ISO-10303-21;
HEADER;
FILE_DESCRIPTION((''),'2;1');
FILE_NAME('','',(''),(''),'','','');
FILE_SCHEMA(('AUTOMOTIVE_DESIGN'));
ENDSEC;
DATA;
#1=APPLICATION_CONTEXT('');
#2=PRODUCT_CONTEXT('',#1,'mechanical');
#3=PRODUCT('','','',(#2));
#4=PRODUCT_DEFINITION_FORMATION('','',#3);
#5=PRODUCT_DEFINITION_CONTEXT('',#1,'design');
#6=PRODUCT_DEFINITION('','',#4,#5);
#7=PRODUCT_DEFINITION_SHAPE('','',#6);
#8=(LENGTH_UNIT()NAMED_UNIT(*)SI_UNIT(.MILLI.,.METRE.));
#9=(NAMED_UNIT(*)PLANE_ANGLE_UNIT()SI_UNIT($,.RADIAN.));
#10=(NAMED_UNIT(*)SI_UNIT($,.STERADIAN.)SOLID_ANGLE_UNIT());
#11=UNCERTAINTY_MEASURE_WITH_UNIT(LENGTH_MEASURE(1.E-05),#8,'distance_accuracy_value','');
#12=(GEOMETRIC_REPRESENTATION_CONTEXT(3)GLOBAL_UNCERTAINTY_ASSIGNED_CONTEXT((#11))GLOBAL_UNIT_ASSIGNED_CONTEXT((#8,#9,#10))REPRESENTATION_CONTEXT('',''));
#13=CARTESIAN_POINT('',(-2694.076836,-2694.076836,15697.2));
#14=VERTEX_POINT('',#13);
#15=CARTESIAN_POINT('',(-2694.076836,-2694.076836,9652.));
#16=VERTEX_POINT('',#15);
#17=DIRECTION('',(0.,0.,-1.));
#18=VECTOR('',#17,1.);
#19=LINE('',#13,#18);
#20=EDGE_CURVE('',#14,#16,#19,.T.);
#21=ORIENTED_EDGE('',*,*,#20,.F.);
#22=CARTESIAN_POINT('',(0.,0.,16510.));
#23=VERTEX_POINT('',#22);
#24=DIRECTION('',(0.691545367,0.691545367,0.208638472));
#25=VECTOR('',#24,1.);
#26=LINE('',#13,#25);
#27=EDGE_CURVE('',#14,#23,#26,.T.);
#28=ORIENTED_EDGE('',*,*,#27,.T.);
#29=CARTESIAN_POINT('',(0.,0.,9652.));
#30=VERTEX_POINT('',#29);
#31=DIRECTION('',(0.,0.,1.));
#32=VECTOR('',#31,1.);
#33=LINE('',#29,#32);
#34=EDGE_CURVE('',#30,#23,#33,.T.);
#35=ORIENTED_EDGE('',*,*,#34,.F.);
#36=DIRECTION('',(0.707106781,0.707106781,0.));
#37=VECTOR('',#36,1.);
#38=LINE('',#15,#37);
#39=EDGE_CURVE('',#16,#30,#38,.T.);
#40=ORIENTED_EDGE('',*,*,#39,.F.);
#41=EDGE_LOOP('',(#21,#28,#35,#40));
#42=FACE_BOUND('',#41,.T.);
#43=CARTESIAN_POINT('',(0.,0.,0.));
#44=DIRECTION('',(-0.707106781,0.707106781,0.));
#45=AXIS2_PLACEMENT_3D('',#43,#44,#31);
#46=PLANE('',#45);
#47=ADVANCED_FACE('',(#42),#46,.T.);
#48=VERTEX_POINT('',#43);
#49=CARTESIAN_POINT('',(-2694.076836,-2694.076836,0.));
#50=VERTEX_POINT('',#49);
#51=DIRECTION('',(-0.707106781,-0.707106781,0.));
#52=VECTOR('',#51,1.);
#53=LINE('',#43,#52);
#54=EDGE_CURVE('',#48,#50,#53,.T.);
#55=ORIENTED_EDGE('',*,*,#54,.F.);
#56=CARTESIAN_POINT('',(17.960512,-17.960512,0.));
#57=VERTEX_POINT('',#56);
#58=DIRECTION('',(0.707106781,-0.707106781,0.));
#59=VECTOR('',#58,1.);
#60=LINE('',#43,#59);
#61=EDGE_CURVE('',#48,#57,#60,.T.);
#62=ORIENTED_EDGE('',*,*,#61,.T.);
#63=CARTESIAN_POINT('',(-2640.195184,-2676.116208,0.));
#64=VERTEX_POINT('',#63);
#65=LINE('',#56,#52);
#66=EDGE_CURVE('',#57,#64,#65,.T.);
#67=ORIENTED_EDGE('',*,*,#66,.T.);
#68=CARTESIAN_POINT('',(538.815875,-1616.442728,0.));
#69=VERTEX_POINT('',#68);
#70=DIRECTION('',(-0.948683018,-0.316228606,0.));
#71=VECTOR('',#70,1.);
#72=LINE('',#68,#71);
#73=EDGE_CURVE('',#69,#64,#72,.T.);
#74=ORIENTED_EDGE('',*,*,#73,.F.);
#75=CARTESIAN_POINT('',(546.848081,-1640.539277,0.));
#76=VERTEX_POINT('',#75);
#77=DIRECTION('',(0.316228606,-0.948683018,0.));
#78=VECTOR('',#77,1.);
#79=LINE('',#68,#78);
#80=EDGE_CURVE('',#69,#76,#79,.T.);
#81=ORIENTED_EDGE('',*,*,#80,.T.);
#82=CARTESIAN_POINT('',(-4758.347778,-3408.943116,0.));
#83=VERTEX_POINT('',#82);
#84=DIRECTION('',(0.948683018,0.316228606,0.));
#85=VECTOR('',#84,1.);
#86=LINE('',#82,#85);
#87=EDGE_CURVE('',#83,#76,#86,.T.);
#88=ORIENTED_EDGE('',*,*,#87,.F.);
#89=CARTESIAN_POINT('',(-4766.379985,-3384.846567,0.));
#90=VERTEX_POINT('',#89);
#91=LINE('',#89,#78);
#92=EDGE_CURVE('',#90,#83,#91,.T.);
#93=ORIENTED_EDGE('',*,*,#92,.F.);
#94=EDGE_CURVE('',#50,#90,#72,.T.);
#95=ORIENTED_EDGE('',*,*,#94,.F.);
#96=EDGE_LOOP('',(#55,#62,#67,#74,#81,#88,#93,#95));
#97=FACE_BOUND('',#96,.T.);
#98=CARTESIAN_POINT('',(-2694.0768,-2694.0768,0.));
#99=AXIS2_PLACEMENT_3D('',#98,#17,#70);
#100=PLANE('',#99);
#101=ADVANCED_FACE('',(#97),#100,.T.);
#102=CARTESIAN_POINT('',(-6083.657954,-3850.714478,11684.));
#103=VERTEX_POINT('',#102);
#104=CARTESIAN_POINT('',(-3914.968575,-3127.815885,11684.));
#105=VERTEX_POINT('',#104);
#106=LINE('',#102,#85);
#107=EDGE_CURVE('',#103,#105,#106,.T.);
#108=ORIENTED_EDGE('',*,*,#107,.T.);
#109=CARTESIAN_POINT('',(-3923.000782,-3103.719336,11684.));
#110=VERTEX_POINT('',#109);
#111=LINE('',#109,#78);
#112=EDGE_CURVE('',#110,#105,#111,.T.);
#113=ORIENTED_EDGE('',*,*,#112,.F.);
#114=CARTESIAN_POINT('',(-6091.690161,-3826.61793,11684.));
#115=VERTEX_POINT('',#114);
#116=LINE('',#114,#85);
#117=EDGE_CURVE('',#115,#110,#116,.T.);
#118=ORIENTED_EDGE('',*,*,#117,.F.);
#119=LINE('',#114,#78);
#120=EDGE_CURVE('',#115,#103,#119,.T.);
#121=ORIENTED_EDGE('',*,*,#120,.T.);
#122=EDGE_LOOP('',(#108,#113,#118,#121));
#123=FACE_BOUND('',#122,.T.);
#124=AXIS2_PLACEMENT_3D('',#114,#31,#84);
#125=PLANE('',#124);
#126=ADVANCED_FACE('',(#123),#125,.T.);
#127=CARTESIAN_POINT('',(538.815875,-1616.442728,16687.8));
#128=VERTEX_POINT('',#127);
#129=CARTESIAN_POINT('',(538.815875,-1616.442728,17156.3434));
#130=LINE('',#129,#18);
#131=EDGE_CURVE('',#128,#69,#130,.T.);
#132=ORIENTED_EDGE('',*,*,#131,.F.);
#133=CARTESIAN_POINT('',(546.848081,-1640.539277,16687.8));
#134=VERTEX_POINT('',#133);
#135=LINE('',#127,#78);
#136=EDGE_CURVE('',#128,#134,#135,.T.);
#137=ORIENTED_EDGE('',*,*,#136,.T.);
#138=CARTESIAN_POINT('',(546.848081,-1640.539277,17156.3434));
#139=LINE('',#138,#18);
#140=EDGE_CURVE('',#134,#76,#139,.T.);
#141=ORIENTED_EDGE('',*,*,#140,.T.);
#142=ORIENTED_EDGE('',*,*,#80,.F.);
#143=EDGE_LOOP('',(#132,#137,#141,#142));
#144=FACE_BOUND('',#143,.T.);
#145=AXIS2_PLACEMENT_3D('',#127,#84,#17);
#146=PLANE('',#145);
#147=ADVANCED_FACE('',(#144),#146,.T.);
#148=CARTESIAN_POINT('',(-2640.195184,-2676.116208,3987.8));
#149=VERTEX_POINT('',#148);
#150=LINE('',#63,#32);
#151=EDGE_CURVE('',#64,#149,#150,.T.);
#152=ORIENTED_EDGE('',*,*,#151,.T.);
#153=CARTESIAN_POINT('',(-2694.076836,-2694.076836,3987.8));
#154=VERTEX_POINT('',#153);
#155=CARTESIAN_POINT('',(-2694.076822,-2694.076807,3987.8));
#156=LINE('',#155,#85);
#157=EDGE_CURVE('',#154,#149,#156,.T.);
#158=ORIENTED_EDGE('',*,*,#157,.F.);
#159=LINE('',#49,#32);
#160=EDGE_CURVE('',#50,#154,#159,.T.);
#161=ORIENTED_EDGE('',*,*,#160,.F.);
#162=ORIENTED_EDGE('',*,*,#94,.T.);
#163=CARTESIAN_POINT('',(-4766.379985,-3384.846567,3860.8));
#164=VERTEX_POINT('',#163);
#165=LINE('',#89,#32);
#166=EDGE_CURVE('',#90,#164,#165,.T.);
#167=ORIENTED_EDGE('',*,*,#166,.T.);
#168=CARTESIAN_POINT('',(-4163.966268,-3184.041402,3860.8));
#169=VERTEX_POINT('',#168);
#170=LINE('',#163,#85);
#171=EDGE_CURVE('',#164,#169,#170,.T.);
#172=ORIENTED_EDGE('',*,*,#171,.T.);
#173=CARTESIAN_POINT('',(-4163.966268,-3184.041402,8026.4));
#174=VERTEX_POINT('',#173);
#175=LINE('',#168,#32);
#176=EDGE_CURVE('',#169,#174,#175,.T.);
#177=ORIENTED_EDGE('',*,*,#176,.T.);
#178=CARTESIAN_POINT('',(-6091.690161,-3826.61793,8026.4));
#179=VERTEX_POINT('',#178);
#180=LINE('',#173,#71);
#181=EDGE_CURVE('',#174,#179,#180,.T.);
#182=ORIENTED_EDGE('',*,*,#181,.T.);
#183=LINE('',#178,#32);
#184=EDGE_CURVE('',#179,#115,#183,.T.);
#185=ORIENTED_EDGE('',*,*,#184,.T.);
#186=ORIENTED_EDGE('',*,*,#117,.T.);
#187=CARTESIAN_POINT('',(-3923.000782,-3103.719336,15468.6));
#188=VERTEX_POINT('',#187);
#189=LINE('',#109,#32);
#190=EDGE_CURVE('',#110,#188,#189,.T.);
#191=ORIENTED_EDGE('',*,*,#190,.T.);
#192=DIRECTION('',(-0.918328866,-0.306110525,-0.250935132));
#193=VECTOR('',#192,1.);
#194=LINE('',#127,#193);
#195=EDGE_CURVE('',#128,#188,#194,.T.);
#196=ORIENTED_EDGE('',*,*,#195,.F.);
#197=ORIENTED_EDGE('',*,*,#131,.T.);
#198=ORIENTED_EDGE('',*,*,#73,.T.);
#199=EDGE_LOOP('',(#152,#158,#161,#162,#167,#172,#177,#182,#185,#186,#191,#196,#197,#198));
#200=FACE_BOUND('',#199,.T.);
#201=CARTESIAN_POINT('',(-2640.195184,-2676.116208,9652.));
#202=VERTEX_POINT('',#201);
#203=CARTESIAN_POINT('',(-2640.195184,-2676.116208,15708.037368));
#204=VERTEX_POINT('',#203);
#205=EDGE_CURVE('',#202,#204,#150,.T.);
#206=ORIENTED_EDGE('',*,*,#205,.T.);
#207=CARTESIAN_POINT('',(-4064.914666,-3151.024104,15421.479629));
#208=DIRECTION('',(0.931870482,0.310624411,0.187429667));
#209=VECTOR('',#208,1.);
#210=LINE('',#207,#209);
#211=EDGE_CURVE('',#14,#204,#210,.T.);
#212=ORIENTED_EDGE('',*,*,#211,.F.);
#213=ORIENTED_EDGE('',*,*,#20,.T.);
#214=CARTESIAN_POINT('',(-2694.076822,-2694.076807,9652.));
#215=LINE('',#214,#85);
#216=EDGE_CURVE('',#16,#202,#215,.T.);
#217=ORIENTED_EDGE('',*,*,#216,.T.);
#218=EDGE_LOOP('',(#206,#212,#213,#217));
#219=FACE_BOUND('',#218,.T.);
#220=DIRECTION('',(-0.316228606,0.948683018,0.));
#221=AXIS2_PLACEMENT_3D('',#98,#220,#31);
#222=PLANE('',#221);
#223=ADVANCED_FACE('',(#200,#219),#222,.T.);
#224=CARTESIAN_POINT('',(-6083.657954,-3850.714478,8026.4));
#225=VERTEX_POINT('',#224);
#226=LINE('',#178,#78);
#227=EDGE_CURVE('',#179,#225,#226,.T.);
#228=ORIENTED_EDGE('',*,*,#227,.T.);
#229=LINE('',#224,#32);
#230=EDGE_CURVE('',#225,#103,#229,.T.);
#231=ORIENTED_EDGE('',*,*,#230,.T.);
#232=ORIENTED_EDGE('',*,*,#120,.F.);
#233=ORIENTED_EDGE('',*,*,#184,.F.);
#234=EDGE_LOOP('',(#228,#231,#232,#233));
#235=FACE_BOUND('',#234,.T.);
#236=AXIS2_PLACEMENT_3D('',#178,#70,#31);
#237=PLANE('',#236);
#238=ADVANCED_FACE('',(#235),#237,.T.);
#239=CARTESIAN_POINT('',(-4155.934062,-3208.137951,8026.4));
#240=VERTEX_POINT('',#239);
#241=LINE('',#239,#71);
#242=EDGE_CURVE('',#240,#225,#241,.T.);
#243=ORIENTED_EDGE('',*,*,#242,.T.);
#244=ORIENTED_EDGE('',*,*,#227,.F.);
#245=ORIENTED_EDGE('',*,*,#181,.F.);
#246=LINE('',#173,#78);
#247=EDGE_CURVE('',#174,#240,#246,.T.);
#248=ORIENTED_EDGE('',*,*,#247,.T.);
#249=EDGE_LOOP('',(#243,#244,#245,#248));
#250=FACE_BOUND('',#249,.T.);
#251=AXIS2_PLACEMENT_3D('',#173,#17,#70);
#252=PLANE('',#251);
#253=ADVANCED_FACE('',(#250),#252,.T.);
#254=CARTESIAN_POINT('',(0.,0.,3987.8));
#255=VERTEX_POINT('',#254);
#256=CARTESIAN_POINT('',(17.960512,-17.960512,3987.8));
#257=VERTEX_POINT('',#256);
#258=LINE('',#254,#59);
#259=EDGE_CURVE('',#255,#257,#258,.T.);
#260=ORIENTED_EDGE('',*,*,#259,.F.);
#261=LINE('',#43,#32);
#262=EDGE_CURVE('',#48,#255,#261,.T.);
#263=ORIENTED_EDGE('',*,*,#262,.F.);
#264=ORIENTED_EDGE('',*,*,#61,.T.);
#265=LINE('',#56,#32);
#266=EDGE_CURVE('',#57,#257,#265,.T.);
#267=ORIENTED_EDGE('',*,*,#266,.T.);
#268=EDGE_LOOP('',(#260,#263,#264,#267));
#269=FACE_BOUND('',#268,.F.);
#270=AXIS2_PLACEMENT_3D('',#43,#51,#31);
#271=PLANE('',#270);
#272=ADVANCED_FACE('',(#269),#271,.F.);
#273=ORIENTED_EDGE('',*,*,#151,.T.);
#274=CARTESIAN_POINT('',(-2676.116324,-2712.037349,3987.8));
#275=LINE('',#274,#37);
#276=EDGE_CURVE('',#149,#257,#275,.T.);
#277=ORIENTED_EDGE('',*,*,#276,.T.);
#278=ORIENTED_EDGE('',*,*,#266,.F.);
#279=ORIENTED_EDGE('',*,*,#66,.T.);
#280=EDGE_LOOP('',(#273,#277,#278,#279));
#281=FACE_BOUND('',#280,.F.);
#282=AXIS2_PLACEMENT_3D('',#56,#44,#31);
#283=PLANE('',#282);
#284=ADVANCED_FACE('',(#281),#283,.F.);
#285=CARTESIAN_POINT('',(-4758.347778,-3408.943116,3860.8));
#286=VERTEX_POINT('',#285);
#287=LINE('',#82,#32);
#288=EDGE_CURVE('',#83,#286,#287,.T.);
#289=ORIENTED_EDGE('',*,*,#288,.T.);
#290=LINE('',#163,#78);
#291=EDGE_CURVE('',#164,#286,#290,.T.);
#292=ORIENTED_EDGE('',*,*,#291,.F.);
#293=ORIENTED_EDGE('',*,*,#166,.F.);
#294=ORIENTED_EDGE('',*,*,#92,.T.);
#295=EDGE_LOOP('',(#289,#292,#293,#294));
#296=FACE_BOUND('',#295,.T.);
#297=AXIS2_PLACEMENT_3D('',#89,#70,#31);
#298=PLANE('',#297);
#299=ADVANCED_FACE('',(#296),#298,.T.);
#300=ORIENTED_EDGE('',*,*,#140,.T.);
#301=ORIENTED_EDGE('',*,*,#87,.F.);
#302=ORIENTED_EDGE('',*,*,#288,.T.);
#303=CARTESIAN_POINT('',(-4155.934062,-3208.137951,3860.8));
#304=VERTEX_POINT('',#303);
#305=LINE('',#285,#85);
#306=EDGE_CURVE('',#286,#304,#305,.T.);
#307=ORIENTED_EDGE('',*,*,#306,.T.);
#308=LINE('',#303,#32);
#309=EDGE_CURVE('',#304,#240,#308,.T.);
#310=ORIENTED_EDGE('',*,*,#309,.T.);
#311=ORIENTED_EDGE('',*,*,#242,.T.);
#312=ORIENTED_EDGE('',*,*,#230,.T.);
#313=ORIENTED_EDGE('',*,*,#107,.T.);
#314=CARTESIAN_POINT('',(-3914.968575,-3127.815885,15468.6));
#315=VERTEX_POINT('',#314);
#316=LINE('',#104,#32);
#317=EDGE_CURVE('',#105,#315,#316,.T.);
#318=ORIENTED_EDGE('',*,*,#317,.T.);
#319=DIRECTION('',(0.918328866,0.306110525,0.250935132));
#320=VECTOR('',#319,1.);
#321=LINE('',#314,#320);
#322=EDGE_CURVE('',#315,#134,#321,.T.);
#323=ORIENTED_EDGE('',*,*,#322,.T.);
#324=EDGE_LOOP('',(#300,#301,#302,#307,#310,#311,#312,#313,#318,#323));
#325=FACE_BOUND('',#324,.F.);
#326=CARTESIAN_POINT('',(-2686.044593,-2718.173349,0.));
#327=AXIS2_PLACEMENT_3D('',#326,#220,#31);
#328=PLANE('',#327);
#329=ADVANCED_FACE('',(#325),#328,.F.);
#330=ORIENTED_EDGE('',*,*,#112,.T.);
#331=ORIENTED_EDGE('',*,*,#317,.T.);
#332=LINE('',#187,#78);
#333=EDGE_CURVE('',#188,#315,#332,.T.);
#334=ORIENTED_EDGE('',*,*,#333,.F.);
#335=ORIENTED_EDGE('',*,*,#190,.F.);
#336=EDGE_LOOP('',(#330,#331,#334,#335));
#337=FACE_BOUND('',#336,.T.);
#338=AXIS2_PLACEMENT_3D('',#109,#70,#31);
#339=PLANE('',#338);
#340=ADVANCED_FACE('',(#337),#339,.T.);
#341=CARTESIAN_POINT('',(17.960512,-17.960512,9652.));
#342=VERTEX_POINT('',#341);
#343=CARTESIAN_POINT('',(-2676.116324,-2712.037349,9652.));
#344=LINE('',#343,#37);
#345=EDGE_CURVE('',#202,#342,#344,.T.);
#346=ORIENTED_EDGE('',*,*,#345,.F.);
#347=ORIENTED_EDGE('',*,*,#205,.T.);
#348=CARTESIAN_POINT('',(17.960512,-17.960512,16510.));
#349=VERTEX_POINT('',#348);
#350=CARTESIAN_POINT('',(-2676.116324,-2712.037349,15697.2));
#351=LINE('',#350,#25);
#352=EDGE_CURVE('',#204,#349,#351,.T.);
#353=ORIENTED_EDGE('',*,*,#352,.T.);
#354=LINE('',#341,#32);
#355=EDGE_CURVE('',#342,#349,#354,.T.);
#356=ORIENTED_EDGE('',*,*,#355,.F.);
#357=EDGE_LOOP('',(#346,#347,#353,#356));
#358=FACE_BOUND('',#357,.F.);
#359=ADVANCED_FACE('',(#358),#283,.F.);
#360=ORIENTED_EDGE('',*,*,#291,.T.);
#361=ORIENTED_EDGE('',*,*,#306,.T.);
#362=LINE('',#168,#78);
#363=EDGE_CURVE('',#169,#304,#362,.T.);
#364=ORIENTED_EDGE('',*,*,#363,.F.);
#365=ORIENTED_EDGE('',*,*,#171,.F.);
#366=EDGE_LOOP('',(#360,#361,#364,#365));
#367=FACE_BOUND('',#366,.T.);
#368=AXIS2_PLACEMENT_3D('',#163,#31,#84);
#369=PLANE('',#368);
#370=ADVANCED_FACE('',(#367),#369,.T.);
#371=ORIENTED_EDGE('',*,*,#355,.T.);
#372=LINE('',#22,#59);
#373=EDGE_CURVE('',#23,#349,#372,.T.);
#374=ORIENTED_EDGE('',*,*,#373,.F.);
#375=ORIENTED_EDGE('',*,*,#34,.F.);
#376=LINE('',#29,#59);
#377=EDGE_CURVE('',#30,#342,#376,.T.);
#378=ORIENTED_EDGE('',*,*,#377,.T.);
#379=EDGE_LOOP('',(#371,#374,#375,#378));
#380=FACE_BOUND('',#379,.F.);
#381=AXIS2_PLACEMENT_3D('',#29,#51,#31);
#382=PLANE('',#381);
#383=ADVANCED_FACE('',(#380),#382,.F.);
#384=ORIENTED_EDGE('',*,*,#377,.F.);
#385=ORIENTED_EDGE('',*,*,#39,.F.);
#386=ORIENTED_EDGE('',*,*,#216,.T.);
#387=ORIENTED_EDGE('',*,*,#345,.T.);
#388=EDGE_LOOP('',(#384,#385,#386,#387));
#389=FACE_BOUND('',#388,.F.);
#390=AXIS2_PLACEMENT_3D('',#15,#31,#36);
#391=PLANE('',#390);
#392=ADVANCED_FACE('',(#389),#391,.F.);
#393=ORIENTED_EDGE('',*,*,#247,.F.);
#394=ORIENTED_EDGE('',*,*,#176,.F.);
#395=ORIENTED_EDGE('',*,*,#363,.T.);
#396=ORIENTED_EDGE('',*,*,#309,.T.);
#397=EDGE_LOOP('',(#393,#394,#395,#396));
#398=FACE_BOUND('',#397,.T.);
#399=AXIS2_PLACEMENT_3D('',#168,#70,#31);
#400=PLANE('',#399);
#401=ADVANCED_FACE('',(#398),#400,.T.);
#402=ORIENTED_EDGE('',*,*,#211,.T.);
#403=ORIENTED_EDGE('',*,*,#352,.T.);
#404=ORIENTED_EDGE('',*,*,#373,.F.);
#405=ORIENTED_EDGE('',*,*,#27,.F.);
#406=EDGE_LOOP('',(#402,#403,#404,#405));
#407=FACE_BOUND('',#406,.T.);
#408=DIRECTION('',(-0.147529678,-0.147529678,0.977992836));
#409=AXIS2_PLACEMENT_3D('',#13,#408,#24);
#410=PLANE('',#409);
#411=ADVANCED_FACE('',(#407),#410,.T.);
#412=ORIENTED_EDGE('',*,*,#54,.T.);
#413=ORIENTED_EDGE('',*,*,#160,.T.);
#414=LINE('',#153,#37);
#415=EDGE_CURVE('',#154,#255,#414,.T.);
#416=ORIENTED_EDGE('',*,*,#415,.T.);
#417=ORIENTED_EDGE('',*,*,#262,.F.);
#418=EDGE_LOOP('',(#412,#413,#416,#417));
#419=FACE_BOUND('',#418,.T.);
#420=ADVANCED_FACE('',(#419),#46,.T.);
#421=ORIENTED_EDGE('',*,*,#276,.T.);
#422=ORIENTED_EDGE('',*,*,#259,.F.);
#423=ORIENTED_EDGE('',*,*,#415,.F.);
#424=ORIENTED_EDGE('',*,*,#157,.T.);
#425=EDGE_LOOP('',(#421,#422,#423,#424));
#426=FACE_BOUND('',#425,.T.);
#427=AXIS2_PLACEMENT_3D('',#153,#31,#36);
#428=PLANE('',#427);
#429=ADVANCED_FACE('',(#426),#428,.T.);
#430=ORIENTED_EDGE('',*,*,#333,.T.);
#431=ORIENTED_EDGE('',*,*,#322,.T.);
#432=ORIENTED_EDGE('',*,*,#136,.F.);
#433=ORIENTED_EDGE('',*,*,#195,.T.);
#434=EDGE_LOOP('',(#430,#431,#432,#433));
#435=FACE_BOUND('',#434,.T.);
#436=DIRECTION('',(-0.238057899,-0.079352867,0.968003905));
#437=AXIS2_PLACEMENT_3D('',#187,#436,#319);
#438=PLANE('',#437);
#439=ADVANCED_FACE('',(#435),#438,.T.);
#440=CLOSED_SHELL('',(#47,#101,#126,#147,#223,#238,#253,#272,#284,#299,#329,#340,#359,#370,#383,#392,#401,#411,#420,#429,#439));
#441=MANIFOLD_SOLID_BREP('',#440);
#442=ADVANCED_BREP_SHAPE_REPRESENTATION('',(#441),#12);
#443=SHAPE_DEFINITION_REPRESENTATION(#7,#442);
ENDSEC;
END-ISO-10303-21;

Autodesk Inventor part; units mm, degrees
ref_plane "YZ Plane" through (0, 0, 0) normal (1, 0, 0) x (0, 1, 0)
ref_plane "Work Plane3" through (0, 0, 0) normal (-0.7071068, 0.7071068, 0) x (0, 0, 1)
sketch "Sketch9" plane through (0, 0, 0) normal (-0.7071068, 0.7071068, 0) x (0, 0, 1)
  line L0 (0, 0) -> (0, -3810)
  line L1 (0, -3810) -> (3987.8, -3810)
  line L2 (3987.8, -3810) -> (3987.8, 0)
  line L3 (0, 0) -> (3987.8, 0)
  line L4 (3987.8, -3810) -> (9652, -3810) construction
  line L5 (9652, -3810) -> (9652, 0)
  line L6 (9652, 0) -> (16510, 0)
  line L7 (15697.2, -3810) -> (9652, -3810)
  line L8 (15697.2, -3810) -> (16510, 0)
  dimension "d39" = 3810
  dimension "d40" = 3987.8
  dimension "d53" = 5664.2
  dimension "d54" = 6045.2
  dimension "d55" = 6858
ref_plane "4-12pictchWorkPlane" through (-2694.0768, -2694.0768, 0) normal (-0.3162286, 0.948683, 0) x (0, 0, 1)
sketch "Sketch10" plane through (-2694.0768, -2694.0768, 0) normal (-0.3162286, 0.948683, 0) x (0, 0, 1)
  line L0 (0, 0) -> (0, -2184.4)
  line L1 (0, -2184.4) -> (3860.8, -2184.4)
  line L2 (3860.8, -2184.4) -> (3860.8, -1549.4)
  line L3 (3860.8, -1549.4) -> (8026.4, -1549.4)
  line L4 (8026.4, -1549.4) -> (8026.4, -3581.4)
  line L5 (8026.4, -3581.4) -> (11684, -3581.4)
  line L6 (11684, -3581.4) -> (11684, -1295.4)
  line L7 (11684, -1295.4) -> (15468.6, -1295.4)
  line L8 (15468.6, -1295.4) -> (15468.6, 3407.7691) construction
  line L9 (17156.3434, 3407.7691) -> (0, 3407.7691)
  line L10 (15468.6, 3407.7691) -> (16687.8, 3407.7691) construction
  line L11 (15468.6, -1295.4) -> (16687.8, 3407.7691)
  line L12 (0, 0) -> (15804.4058, 0)
  line L13 (0, 0) -> (0, 3407.7691)
  line L14 (0, 3407.7691) -> (16687.8, 3407.7691)
  dimension "d42" = 2184.4
  dimension "d43" = 3860.8
  dimension "d44" = 635
  dimension "d45" = 4165.6
  dimension "d46" = 2032
  dimension "d47" = 3657.6
  dimension "d48" = 2286
  dimension "d49" = 3784.6
  dimension "d50" = 1219.2
  dimension "d58" = 90
extrude "Extrusion8" add sketch "Sketch10" against normal blind 25.4
extrude "Extrusion9" add sketch "Sketch9" against normal blind 25.4
equation "\"pitch_4_12\" = 18.435deg"
equation "\"pitch_12_12\" = 45deg"
equation "\"d41\" = pitch_4_12"
properties part number "mainPartHouseRoof"
